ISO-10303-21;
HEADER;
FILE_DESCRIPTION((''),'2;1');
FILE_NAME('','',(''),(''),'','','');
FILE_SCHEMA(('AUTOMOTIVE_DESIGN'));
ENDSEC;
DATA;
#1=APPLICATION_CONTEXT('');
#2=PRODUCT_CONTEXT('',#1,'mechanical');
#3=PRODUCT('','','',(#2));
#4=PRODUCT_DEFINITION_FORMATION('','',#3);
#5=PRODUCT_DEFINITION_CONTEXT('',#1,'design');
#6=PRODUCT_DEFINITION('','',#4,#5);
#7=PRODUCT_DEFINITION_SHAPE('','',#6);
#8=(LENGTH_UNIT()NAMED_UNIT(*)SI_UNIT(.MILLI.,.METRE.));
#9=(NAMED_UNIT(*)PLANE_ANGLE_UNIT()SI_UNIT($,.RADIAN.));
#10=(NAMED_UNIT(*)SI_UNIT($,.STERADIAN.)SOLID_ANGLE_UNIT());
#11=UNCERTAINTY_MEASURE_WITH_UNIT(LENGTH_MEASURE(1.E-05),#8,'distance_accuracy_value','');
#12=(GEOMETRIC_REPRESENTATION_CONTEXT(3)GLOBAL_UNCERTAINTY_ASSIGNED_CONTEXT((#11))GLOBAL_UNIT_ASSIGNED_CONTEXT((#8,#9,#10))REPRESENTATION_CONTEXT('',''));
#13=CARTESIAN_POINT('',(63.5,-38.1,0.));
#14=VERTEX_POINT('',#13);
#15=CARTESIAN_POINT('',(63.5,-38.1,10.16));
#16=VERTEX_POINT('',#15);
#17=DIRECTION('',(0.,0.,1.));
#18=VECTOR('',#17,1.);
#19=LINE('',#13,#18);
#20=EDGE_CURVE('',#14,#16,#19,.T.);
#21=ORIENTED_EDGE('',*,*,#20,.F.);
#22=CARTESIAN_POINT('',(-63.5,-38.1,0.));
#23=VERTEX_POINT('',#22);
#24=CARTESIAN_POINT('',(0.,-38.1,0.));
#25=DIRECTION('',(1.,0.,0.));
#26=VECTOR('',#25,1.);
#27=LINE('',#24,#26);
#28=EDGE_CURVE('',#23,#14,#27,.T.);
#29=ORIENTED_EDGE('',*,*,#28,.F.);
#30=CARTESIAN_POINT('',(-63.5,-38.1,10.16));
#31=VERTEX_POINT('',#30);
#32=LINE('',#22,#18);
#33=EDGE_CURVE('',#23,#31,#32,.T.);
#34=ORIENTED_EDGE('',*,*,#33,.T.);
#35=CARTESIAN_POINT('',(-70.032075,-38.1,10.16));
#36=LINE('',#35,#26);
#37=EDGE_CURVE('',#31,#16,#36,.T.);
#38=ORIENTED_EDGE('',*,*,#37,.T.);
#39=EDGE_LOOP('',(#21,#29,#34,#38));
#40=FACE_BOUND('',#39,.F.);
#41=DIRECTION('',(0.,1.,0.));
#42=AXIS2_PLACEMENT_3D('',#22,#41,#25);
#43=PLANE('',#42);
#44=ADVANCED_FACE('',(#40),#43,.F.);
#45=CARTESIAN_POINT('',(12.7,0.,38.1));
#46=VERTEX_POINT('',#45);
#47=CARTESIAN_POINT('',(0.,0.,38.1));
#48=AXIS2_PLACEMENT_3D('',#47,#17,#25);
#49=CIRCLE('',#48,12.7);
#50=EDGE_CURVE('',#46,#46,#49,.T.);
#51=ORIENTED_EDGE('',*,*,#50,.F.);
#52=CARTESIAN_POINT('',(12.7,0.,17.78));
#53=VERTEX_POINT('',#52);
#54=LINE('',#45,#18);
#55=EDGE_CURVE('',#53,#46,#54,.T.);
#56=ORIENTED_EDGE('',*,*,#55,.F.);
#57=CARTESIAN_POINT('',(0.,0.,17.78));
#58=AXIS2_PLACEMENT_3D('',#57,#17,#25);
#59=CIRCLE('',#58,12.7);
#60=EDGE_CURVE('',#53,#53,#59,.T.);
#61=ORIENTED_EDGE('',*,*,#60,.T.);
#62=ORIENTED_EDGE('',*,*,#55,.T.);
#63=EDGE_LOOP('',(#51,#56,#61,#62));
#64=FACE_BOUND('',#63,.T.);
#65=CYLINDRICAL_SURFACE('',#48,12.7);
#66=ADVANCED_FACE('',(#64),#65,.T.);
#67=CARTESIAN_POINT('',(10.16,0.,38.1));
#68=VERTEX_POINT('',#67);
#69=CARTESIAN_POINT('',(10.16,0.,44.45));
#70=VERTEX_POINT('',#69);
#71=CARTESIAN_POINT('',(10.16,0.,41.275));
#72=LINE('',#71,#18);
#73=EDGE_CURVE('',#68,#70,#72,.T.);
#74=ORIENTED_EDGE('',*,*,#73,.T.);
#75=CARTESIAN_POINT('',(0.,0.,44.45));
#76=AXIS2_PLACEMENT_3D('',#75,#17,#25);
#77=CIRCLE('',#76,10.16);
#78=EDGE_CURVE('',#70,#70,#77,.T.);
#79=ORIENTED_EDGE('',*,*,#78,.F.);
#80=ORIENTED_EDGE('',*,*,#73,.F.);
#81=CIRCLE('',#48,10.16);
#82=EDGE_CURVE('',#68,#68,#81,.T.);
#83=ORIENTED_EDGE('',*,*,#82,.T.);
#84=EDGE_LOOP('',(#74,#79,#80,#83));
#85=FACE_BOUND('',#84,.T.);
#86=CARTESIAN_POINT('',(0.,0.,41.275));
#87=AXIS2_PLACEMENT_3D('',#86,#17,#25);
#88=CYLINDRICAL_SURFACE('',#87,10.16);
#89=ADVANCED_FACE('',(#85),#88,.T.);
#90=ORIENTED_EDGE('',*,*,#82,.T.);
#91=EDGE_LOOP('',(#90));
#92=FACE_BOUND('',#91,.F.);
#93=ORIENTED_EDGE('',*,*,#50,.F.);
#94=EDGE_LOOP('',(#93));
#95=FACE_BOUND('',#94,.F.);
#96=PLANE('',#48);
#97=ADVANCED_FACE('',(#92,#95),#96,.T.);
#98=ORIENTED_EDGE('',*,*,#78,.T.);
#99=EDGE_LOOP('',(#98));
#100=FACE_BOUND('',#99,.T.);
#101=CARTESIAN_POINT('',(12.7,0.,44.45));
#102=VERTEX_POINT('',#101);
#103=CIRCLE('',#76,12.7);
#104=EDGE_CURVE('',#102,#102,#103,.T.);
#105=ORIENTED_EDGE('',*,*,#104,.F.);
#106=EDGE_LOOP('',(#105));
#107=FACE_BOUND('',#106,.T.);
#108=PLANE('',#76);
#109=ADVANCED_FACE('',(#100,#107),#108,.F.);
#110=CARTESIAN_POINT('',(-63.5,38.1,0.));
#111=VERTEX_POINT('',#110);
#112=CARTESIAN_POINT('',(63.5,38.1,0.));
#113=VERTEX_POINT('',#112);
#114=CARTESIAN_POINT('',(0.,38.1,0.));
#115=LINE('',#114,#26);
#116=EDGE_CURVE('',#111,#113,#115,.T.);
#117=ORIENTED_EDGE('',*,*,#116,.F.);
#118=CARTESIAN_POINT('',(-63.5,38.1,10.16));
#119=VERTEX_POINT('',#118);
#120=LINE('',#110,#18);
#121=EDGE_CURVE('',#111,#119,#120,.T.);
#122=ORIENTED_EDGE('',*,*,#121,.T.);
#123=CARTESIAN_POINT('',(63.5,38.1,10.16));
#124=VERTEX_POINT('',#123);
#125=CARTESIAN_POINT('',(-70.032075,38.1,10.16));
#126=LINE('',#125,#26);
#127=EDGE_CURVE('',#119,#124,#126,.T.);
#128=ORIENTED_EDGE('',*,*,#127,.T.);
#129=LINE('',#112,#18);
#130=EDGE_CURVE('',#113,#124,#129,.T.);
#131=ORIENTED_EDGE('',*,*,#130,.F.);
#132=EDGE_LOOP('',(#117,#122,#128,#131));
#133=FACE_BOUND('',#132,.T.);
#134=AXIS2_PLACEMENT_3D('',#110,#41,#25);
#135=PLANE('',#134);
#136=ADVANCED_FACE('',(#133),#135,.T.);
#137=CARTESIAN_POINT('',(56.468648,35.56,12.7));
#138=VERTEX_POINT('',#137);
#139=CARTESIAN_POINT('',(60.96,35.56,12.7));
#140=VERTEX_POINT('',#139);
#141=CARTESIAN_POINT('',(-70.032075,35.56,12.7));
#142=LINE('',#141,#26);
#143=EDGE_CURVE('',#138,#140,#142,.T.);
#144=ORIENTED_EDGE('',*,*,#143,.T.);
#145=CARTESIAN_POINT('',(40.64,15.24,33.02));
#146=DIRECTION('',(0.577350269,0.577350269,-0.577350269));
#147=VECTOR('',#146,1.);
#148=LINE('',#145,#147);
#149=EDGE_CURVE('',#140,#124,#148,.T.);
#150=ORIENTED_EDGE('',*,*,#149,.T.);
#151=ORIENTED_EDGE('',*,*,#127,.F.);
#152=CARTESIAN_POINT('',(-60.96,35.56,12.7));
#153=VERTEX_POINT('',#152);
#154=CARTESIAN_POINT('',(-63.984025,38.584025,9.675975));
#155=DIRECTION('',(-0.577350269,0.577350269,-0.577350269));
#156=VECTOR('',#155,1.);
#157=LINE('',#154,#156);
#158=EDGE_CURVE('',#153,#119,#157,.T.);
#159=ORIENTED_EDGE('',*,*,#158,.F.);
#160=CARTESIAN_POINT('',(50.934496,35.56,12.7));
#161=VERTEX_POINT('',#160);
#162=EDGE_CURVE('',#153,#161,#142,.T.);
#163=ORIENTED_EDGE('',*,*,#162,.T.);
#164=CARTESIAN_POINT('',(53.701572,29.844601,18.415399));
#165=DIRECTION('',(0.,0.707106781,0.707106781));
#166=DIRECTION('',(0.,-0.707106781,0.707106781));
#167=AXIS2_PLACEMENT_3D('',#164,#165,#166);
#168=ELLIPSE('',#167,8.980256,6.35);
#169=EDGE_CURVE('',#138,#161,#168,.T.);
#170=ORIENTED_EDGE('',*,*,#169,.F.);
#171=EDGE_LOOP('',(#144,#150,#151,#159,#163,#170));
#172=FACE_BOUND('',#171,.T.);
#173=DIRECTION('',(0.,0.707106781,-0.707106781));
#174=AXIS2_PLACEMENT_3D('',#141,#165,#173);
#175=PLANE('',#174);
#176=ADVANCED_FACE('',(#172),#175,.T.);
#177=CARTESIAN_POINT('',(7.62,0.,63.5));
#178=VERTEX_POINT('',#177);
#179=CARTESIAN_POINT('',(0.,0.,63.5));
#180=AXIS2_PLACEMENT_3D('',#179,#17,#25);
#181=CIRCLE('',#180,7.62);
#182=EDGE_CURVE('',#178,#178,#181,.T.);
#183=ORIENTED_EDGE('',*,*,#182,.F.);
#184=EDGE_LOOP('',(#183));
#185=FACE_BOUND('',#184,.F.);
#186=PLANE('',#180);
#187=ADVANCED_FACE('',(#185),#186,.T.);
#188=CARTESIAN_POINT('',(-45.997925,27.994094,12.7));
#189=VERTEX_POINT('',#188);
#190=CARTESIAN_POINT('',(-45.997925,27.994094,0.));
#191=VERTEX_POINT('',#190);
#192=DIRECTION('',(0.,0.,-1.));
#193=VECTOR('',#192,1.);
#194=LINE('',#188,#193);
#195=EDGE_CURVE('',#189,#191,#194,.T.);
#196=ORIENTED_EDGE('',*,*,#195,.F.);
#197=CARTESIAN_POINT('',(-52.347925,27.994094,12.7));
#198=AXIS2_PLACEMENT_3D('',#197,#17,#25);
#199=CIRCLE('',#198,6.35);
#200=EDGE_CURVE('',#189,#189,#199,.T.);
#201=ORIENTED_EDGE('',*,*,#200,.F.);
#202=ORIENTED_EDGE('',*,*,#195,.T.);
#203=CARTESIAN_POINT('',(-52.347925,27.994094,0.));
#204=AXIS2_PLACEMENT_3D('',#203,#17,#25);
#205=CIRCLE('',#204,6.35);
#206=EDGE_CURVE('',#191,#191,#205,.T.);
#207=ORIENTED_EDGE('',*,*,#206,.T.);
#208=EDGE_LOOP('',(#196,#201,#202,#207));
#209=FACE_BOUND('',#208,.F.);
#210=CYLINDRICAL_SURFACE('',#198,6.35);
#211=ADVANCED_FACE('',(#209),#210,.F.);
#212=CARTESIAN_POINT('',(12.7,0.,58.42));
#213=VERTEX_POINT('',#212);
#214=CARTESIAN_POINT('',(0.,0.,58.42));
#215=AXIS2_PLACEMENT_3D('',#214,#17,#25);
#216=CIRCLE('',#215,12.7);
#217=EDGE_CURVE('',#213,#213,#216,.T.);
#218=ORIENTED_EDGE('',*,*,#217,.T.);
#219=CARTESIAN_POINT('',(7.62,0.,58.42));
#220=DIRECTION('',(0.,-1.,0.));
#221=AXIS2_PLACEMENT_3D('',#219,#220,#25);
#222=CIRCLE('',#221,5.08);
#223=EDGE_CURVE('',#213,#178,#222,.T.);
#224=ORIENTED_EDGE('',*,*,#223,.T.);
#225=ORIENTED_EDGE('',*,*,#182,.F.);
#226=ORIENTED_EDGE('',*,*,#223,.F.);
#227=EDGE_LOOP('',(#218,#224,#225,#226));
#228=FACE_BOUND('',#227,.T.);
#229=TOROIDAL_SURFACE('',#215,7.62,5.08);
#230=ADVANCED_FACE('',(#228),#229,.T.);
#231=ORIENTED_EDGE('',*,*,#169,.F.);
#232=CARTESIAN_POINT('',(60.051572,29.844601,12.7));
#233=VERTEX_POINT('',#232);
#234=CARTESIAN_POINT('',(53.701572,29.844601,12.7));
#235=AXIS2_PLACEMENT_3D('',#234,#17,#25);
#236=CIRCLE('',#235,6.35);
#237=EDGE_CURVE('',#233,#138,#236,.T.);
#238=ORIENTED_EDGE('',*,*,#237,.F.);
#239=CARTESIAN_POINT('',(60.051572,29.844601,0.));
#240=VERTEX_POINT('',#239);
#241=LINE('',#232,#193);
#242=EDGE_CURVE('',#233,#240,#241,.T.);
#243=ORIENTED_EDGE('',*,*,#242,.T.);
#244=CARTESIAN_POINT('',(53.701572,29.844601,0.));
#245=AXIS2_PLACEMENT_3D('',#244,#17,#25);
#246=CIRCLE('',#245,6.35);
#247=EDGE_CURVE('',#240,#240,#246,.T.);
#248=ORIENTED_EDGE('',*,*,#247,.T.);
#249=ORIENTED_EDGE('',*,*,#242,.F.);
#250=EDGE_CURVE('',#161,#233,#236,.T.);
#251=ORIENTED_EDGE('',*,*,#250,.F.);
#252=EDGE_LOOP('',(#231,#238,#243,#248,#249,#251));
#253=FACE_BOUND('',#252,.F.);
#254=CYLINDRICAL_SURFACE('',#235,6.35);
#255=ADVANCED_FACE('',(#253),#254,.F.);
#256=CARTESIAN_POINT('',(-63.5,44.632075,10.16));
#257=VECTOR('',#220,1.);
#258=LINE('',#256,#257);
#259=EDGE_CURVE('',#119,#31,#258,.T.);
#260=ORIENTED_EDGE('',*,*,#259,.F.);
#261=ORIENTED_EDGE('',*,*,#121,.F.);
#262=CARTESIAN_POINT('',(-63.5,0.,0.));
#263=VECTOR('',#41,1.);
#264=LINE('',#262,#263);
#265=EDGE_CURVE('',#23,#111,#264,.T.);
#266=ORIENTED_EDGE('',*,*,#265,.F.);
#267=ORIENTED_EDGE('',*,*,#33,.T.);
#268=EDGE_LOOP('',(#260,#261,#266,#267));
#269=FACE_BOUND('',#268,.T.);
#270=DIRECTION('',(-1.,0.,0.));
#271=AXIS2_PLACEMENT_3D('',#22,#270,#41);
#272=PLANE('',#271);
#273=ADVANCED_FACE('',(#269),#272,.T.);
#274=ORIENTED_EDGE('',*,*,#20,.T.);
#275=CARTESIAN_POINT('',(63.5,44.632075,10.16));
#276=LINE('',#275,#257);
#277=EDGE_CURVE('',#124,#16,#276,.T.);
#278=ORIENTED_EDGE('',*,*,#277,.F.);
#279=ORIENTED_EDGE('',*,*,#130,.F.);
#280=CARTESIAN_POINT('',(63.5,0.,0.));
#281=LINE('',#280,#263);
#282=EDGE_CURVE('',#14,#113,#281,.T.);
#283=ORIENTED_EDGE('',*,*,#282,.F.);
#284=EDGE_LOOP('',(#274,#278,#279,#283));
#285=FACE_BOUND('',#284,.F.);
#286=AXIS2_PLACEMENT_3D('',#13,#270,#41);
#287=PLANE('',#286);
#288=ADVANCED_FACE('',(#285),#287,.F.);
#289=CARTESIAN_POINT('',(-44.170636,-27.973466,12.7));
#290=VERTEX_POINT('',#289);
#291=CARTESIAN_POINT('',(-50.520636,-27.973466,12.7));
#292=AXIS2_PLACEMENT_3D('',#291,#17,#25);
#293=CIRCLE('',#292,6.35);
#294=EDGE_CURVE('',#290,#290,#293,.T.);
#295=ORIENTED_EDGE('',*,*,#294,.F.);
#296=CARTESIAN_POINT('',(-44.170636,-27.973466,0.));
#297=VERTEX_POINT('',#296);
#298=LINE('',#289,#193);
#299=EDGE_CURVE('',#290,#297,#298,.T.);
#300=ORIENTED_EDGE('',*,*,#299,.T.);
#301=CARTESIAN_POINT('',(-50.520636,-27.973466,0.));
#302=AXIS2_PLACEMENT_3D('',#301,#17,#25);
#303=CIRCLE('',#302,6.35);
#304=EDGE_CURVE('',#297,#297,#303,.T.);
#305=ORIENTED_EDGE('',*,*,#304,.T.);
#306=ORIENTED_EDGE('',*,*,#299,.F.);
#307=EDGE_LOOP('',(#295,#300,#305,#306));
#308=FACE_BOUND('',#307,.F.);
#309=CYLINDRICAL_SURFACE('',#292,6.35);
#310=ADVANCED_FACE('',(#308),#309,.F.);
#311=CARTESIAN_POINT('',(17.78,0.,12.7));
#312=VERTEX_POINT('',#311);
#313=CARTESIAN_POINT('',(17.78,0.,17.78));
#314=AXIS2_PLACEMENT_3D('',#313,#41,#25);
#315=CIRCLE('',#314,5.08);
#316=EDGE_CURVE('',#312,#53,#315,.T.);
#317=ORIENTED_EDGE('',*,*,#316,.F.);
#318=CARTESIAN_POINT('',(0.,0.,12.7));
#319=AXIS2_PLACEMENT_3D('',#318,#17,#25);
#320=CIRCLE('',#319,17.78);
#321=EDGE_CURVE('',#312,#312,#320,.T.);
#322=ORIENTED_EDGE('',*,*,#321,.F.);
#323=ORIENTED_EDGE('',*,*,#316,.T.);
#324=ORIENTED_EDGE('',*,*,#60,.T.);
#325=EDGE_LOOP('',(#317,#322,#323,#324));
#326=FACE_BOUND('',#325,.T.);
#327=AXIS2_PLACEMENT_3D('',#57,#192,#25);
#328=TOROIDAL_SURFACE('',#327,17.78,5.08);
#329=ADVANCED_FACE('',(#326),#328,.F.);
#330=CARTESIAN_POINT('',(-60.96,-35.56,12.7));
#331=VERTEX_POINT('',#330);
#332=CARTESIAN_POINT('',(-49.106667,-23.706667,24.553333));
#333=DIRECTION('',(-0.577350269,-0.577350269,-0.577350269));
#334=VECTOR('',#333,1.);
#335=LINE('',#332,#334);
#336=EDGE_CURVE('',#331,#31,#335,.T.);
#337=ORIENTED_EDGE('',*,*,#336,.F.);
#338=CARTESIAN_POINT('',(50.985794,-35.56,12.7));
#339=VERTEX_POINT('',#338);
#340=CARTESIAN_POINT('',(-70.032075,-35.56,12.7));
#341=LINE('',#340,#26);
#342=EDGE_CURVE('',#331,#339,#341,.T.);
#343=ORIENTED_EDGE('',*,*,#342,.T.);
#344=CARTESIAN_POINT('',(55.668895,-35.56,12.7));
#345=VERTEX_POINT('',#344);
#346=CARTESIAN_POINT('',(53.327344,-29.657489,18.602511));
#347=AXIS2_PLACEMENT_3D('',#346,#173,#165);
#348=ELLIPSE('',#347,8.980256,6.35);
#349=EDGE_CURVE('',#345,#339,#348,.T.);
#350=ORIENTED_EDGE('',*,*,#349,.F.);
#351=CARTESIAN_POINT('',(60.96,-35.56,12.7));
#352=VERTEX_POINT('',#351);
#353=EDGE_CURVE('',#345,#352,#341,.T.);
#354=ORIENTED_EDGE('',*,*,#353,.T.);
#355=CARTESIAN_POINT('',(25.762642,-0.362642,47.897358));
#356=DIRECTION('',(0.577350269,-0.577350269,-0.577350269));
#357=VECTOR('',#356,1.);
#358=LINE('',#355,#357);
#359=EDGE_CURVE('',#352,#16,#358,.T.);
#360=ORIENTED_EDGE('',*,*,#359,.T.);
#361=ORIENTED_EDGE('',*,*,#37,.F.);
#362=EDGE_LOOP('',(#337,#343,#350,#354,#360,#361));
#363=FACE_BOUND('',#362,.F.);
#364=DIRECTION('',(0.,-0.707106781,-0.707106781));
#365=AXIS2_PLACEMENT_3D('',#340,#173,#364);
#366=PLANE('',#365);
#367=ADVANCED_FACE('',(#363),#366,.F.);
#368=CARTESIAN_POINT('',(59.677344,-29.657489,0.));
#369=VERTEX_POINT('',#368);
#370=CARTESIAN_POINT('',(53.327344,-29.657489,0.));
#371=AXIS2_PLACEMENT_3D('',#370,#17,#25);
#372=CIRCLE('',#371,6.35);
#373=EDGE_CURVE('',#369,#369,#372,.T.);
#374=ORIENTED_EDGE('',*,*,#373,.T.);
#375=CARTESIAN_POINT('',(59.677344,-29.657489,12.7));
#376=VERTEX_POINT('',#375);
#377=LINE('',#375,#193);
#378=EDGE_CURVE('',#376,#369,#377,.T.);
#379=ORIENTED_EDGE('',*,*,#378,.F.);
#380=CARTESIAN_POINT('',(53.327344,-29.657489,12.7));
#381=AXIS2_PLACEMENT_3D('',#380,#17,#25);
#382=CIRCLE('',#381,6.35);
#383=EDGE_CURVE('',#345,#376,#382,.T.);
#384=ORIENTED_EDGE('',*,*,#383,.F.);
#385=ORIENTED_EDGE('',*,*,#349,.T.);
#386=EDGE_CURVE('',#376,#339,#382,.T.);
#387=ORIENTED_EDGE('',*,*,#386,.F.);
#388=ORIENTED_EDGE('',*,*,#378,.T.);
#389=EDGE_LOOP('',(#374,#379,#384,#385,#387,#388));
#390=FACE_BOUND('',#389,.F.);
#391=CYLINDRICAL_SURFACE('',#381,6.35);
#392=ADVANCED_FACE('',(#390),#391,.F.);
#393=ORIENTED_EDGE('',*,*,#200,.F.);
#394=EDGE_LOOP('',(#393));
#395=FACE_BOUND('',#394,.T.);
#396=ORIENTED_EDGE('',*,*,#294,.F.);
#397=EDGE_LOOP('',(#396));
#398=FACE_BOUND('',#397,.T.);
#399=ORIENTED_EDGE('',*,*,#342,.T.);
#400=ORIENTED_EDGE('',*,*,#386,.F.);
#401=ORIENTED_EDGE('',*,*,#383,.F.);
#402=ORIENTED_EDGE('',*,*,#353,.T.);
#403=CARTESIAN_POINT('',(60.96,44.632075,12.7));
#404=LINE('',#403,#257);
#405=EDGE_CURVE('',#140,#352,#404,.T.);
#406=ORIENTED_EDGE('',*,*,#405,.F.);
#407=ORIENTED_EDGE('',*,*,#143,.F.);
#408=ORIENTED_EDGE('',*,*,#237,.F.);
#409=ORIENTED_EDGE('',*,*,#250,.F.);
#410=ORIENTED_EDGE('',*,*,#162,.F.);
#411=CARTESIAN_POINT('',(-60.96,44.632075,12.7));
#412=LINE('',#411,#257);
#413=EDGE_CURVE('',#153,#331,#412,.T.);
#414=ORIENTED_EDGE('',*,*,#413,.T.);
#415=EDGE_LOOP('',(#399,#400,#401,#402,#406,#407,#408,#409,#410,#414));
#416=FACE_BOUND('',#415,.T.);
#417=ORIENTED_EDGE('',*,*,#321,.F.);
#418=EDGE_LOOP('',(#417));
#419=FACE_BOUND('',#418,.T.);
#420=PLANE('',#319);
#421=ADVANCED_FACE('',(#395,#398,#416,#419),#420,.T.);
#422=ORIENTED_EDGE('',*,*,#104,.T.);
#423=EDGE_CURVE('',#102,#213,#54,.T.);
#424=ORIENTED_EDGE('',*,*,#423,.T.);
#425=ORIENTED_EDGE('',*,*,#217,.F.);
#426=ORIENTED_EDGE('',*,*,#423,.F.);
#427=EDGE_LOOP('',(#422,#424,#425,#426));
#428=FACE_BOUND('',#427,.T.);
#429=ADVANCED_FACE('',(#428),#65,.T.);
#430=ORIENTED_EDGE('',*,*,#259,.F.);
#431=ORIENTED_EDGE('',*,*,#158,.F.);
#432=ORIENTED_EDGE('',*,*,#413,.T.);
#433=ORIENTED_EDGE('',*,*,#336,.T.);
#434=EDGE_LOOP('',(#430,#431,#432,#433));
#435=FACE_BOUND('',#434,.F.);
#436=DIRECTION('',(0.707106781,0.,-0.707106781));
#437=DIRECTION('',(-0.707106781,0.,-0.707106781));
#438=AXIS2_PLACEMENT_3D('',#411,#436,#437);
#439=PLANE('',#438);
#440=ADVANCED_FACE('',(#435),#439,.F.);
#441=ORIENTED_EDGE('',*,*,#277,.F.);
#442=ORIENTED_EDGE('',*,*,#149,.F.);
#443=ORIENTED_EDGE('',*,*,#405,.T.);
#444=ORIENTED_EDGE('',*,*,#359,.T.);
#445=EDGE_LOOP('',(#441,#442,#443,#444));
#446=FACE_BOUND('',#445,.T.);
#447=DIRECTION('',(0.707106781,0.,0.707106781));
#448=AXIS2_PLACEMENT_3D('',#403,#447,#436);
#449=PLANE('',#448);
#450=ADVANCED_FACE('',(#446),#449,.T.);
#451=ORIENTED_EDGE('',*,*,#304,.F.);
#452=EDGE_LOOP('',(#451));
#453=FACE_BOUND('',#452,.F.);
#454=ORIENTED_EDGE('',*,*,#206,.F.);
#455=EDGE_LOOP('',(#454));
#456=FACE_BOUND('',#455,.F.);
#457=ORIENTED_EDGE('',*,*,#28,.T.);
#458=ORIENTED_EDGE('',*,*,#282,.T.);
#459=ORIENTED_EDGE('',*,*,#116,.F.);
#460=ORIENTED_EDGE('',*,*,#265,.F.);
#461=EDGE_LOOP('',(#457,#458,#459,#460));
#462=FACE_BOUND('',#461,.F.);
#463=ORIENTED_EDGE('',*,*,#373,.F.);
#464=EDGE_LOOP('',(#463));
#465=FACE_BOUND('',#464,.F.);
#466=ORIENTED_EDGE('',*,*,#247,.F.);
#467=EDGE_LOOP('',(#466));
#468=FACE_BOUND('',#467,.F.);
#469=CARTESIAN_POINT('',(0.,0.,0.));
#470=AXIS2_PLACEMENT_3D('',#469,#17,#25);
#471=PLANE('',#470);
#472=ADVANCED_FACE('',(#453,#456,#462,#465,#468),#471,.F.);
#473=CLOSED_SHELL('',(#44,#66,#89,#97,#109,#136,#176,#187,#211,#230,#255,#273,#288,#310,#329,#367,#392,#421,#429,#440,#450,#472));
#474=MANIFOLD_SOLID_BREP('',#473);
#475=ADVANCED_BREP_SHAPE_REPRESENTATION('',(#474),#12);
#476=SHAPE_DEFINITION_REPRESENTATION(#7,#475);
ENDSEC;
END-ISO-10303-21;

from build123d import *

# Parameters (mm, degrees)
F0_W        = 127
F0_H        = 76.2
F1_DEPTH    = 12.7
F2_R        = 6.35
F3_DEPTH    = 12.701
F4_W        = 12.7
F4_H        = 50.8
F6_W        = 13.0245922636
F6_H        = 6.35
F8_R        = 5.08
F9_T1_DEPTH = 140.0641495789
F9_T3_DEPTH = 89.2641495789


# Not quite as in the source:
# - a fillet or chamfer that OpenCascade refuses, or shapes differently, is made with other operations: its cross-section is extruded or revolved along the edge and cut away or added


with BuildPart() as f1:
    # F0 (on Top) → F1 (new body)
    with BuildSketch(Plane.XY):
        Rectangle(F0_W, F0_H)
    extrude(amount=F1_DEPTH)

    # F2 (on face) → F3 (cut, through all)
    with BuildSketch(Plane.XY.offset(12.7)):
        with Locations((-52.3479245603, 27.9940944165)):
            Circle(F2_R)
        with Locations((53.7015721202, 29.8446007073)):
            Circle(F2_R)
        with Locations((-50.5206361413, -27.9734656215)):
            Circle(F2_R)
        with Locations((53.327344358, -29.6574886888)):
            Circle(F2_R)
    extrude(amount=-F3_DEPTH, mode=Mode.SUBTRACT)

    # F4 (on Front) → F5 (revolve)
    with BuildSketch(Plane.XZ):
        with Locations((6.35, 38.1)):
            Rectangle(F4_W, F4_H)
    revolve(axis=Axis((0, 0, 38.1), (0, 0, 1)))

    # F6 (on Front) → F7 (revolve, cut)
    with BuildSketch(Plane.XZ):
        with Locations((16.6722961318, 41.275)):
            Rectangle(F6_W, F6_H)
    revolve(axis=Axis((0, 0, 38.1), (0, 0, 1)), mode=Mode.SUBTRACT)

    # F8
    f8_edges = [f1.edges().sort_by_distance(p)[0] for p in [
        (-12.7, 0, 63.5),
        (-12.7, 0, 12.7),
    ]]
    fillet(f8_edges, radius=F8_R)

    # F9: chamfer of 2.54 on 4 edges, made by hand

    # F9_s2 → F9_t1 (cut)
    with BuildSketch(Plane.YZ.offset(-70.0320747894)):
        Polygon((-35.56, 12.7), (-38.1, 10.16), (-38.1, 12.7), align=None)
        Polygon((35.56, 12.7), (38.1, 10.16), (38.1, 12.7), align=None)
    extrude(amount=F9_T1_DEPTH, mode=Mode.SUBTRACT)

    # F9_s4 → F9_t3 (cut)
    with BuildSketch(Plane.XZ.offset(-44.6320747894)):
        Polygon((60.96, 12.7), (63.5, 10.16), (63.5, 12.7), align=None)
        Polygon((-60.96, 12.7), (-63.5, 10.16), (-63.5, 12.7), align=None)
    extrude(amount=F9_T3_DEPTH, mode=Mode.SUBTRACT)


solid = f1.part
